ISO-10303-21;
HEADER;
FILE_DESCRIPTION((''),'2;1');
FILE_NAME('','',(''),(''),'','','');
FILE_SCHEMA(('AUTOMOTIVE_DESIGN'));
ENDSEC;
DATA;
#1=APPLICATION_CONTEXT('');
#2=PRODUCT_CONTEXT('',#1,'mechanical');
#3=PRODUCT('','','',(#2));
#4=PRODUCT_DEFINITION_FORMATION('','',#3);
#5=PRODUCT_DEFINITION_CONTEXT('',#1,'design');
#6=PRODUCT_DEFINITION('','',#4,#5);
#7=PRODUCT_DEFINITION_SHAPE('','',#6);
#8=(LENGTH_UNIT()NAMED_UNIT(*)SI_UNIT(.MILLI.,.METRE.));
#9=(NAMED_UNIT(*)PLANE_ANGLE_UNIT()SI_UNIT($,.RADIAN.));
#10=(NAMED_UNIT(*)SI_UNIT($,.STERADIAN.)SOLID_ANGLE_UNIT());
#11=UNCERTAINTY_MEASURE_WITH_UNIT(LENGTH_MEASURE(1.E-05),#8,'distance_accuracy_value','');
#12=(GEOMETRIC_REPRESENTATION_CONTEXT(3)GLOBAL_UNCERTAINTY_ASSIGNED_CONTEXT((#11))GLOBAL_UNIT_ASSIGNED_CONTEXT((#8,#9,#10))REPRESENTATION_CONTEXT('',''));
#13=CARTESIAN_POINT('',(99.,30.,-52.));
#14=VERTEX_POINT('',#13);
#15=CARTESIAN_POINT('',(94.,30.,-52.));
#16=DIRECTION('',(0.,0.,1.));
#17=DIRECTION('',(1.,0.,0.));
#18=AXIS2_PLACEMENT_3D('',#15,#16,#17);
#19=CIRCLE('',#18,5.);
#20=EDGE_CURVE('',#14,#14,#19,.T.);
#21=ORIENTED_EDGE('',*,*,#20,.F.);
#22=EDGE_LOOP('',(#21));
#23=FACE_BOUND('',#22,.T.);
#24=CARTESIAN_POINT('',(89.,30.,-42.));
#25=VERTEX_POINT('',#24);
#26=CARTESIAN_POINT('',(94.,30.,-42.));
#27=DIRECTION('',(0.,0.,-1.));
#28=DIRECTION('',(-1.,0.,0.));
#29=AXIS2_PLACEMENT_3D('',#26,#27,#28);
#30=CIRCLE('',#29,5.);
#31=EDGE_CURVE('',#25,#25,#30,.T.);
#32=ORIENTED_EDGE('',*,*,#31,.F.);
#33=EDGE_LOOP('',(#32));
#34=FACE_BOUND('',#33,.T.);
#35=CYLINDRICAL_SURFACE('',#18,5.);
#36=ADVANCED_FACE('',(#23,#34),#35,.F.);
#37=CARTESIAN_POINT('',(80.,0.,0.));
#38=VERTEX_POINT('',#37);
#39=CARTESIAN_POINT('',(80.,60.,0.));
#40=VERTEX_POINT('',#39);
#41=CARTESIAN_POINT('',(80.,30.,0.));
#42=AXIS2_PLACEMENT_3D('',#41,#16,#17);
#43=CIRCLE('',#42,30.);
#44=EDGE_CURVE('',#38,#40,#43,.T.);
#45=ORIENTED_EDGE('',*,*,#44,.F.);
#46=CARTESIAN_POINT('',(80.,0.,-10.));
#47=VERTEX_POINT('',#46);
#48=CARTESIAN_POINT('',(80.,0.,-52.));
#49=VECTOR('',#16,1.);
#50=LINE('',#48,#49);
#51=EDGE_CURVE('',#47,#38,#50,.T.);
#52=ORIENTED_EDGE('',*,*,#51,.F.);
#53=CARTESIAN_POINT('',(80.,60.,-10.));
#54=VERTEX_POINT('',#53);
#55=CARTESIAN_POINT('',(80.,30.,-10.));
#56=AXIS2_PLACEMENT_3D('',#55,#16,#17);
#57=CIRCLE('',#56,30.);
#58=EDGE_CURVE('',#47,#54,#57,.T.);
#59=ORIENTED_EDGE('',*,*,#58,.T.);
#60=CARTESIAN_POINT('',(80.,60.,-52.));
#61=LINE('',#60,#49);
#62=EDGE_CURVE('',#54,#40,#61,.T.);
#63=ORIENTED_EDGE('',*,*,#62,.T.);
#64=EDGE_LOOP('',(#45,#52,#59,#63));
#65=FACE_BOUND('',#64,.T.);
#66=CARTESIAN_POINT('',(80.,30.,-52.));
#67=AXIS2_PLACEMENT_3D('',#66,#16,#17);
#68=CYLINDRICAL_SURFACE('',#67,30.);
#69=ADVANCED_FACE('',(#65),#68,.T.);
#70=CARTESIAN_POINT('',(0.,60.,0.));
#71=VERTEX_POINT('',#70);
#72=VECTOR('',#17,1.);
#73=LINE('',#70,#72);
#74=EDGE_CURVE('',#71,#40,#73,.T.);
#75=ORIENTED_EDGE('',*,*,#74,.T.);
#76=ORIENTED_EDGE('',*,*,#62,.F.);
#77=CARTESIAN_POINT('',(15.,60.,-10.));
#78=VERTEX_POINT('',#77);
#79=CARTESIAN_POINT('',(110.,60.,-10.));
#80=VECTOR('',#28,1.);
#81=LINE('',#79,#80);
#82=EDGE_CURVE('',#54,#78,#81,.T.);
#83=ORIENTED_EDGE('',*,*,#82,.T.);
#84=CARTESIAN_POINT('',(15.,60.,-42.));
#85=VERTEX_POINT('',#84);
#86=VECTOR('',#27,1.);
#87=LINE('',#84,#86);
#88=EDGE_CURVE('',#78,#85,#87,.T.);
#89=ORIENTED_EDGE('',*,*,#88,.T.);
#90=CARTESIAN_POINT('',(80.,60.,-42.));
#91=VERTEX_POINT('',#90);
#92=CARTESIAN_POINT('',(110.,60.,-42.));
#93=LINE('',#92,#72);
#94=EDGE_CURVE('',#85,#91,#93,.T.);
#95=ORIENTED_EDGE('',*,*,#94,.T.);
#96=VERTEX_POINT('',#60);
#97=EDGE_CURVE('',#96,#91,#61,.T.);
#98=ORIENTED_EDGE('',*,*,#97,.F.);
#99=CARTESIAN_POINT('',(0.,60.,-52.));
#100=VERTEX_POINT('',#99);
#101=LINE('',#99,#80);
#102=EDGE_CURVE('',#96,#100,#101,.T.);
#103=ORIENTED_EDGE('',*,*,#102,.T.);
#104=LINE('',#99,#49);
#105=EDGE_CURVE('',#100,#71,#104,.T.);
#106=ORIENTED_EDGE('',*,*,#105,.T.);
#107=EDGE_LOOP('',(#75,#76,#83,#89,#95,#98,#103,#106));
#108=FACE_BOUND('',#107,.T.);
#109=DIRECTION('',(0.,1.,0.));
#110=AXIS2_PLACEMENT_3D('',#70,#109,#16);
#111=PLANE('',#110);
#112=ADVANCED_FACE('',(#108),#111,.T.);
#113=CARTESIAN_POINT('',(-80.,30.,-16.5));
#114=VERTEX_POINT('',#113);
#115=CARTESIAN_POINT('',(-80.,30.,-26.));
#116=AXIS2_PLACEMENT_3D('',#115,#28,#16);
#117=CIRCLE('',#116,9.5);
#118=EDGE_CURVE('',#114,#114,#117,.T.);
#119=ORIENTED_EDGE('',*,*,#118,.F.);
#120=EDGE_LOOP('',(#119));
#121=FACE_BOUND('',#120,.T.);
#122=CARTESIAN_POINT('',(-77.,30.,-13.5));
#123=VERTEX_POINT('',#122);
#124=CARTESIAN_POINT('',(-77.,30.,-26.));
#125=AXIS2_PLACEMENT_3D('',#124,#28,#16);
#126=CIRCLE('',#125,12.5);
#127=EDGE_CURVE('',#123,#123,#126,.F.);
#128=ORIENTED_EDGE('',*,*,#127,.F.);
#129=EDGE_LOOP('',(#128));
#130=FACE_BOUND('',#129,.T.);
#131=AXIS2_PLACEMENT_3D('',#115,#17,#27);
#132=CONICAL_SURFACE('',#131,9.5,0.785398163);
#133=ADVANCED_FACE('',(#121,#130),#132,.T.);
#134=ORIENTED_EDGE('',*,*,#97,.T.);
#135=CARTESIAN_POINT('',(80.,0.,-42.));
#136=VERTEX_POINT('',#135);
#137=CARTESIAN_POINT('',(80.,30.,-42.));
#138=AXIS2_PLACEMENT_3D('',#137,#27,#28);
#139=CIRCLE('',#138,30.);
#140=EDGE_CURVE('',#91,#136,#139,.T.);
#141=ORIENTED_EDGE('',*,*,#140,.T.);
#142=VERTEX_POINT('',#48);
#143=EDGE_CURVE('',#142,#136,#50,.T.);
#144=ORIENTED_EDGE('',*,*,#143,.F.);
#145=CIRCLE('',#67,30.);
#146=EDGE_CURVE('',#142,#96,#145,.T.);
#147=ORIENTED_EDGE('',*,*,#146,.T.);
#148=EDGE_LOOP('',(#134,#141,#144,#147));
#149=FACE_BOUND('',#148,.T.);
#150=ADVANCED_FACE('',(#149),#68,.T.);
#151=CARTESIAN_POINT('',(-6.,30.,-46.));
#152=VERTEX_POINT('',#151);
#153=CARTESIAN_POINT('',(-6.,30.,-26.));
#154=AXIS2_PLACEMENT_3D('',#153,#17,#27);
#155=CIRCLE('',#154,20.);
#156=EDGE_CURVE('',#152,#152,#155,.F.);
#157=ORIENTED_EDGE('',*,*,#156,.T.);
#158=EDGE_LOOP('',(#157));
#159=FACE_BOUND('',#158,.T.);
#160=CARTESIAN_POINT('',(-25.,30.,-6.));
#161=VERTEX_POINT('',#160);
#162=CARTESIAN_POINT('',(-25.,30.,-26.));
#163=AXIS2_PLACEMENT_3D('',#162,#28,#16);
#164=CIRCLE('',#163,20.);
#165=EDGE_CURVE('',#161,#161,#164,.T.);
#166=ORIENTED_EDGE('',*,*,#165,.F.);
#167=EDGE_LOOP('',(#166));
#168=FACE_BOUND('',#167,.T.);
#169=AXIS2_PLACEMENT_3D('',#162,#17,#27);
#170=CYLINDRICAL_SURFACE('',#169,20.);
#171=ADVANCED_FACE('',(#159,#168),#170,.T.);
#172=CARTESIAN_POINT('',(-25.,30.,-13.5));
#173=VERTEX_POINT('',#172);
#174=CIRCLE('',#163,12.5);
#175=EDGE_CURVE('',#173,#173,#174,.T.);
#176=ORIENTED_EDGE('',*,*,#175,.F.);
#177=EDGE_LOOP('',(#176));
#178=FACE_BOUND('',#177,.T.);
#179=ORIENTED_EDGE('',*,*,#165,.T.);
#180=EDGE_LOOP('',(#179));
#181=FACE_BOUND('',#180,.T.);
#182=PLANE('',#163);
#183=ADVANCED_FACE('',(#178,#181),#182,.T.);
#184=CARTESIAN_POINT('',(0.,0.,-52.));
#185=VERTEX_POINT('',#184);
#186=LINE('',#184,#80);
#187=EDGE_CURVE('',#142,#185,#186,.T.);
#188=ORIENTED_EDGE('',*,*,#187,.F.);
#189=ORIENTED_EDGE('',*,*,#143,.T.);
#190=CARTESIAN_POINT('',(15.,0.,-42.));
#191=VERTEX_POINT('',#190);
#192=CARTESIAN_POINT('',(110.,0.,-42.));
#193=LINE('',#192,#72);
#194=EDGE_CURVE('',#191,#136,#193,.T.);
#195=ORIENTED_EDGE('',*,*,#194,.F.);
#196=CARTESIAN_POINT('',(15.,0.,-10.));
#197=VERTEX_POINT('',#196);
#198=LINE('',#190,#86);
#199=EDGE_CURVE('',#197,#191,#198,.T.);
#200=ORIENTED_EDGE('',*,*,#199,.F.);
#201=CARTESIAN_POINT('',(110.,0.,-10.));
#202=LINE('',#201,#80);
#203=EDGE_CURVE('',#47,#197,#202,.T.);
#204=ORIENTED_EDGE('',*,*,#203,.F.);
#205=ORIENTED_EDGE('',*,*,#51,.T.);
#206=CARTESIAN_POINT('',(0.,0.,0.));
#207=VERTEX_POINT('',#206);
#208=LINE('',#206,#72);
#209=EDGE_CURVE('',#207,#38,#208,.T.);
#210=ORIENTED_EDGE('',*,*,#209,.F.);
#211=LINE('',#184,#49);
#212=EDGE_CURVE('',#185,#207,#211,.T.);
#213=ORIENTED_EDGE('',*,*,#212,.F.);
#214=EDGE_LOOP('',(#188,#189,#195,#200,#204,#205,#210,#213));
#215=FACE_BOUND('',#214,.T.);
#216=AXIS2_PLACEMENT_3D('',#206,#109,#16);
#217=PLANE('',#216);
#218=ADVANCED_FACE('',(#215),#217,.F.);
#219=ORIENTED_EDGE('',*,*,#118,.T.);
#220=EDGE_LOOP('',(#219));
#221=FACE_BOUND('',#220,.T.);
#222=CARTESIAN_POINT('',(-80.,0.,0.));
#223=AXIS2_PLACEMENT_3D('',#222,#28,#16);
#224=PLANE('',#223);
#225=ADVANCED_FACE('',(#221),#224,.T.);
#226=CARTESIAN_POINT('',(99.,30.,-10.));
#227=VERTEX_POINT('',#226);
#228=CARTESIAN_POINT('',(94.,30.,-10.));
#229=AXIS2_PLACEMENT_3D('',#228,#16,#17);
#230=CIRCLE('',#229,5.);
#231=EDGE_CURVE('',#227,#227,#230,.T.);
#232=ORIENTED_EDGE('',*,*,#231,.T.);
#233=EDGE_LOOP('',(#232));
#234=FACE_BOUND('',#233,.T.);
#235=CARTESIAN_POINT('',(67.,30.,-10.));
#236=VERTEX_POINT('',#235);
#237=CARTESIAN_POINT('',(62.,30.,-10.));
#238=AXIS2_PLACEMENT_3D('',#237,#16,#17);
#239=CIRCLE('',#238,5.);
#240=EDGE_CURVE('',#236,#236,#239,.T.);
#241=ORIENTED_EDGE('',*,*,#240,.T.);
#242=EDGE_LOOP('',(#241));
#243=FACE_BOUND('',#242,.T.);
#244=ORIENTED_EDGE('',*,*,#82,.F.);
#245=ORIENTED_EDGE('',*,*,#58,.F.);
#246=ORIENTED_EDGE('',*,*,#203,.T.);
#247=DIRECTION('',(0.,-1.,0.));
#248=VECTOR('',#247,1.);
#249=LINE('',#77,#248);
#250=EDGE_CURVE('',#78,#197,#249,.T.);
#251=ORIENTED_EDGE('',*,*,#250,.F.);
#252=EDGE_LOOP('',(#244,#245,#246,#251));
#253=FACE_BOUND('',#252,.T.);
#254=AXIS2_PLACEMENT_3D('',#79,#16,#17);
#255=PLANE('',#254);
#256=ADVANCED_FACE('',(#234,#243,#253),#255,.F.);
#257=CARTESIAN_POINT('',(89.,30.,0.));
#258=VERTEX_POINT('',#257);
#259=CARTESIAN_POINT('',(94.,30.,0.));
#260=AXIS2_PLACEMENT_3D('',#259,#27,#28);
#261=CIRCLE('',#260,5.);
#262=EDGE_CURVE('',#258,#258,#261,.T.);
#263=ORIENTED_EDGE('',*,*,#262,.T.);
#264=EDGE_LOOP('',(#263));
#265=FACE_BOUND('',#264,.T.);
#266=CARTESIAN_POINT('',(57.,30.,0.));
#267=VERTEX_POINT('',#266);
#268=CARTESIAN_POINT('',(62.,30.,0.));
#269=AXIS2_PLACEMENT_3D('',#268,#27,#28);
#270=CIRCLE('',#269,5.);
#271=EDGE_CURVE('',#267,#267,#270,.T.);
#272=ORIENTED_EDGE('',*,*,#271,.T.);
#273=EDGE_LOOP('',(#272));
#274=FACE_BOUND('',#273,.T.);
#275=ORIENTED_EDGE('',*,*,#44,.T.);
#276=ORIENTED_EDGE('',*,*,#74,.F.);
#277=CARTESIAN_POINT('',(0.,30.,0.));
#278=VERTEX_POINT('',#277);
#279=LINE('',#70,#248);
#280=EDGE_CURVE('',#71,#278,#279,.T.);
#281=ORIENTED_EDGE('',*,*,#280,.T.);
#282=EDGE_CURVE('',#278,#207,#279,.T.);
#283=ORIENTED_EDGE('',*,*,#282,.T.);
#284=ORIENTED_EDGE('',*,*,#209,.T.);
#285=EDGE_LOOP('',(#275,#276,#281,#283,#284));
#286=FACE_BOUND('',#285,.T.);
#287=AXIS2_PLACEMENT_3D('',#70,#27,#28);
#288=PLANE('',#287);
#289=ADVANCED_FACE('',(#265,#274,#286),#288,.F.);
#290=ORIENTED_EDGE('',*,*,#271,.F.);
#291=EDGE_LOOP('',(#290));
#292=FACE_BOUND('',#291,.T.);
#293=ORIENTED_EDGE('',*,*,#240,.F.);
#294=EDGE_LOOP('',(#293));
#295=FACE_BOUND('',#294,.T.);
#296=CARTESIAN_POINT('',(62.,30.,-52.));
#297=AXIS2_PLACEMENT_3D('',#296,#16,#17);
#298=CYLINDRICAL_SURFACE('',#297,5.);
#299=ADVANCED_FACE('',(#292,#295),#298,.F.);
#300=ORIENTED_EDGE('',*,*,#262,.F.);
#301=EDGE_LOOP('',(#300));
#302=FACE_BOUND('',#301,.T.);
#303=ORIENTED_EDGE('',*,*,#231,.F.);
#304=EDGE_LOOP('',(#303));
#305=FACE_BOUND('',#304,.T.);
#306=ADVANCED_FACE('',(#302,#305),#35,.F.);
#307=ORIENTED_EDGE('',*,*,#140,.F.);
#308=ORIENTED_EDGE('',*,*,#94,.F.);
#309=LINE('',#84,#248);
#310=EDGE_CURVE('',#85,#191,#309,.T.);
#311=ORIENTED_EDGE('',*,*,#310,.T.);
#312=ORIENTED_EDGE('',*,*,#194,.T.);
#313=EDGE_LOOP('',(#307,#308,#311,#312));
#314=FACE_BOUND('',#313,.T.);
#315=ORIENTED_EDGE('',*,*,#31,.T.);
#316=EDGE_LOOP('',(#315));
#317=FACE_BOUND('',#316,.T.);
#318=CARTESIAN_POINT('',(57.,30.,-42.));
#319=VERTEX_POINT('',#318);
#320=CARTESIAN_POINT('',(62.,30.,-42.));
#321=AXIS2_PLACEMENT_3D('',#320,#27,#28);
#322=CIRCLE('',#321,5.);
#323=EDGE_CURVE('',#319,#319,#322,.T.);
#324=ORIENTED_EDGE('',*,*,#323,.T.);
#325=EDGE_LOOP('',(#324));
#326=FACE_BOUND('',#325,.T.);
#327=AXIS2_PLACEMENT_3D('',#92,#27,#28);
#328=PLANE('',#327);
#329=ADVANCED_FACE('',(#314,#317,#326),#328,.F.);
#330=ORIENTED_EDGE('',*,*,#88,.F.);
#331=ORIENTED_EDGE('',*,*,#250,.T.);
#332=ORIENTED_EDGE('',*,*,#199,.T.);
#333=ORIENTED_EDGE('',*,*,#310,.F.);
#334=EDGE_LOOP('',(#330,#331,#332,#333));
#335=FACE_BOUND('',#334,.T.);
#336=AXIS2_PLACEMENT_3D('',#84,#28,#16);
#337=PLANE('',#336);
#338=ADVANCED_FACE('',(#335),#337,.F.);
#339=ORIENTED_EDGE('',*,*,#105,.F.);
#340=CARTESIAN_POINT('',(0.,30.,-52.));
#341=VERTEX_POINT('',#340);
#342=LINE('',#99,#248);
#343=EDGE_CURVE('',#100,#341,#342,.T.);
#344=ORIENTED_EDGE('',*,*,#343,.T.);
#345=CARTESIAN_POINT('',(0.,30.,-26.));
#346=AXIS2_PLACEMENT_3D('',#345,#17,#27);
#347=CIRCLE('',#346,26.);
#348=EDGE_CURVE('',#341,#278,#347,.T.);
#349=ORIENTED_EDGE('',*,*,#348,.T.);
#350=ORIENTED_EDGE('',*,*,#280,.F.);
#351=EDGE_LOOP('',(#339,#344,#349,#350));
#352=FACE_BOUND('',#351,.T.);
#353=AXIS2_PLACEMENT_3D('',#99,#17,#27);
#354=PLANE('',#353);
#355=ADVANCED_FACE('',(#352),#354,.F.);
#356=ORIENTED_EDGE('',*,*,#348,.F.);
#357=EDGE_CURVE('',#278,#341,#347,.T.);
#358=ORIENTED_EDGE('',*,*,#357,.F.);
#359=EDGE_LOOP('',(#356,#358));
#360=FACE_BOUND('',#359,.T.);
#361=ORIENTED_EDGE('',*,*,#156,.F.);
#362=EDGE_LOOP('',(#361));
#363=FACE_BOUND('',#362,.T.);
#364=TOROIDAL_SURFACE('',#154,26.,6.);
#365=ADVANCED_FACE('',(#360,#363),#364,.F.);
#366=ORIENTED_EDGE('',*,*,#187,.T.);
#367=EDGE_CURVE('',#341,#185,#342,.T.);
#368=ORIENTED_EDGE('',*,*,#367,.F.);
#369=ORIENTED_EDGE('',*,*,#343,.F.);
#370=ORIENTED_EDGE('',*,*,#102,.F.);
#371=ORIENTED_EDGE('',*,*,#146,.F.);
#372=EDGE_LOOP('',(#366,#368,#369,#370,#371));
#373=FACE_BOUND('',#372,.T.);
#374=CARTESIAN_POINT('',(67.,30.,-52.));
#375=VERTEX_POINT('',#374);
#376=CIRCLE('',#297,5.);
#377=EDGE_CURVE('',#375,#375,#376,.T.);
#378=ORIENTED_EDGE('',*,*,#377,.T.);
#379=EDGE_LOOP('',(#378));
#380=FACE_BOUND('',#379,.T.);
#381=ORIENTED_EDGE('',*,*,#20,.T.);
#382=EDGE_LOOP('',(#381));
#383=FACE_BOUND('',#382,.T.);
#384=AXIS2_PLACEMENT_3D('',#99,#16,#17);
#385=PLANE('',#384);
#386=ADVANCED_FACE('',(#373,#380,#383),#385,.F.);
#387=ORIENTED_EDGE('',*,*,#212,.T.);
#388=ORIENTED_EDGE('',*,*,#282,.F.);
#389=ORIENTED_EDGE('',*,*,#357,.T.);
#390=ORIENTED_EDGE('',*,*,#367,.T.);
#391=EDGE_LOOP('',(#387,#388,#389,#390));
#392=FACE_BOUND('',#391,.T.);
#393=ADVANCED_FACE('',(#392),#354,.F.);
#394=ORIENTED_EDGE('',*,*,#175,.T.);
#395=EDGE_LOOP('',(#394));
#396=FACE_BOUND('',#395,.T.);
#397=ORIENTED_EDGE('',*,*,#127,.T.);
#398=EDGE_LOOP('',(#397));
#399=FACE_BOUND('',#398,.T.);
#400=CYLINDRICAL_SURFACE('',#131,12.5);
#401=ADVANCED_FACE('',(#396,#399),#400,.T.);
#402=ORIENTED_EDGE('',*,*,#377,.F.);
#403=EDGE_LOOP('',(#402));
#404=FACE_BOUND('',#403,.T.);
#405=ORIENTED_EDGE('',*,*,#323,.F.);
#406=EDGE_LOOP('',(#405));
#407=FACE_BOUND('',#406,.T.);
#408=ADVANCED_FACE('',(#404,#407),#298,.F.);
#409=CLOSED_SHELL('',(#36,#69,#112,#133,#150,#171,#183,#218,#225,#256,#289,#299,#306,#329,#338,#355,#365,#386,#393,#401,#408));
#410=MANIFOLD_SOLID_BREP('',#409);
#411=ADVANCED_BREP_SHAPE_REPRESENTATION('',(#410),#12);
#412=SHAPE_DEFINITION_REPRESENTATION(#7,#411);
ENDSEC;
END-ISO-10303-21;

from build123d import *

# Parameters (mm, degrees)
BOSS_EXTRUDE2_DEPTH     = 60
CUT_EXTRUDE1_DEPTH      = 136.661343057
SKETCH3_R               = 12.5
BOSS_EXTRUDE3_DEPTH     = 80
SKETCH3_3_R             = 20
SKETCH3_3_R_2           = 12.5
BOSS_EXTRUDE4_DEPTH     = 25
FILLET2_R               = 6
CHAMFER1_SIZE           = 3
CUT_EXTRUDE2_DEPTH      = 136.661343057
CUT_EXTRUDE2_DEPTH_BACK = 136.661343057
SKETCH4_R               = 5


with BuildPart() as part:
    # Sketch1 → Boss-Extrude2 (new body)
    with BuildSketch(Plane(origin=(0, 0, 0), x_dir=(1, 0, 0), z_dir=(0, 1, 0))):
        Polygon((110, 10), (110, 0), (0, 0), (0, 52), (110, 52), (110, 42), (15, 42), (15, 10), align=None)
    extrude(amount=BOSS_EXTRUDE2_DEPTH)

    # Sketch2 → Cut-Extrude1 (cut, through all)
    with BuildSketch(Plane.XY):
        with BuildLine():
            Line((110, 60), (80, 60))
            ThreePointArc((80, 60), (101.213203436, 51.213203436), (110, 30))
            Line((110, 30), (110, 60))
        make_face()
        with BuildLine():
            Line((110, 0), (110, 30))
            ThreePointArc((110, 30), (101.213203436, 8.786796564), (80, 0))
            Line((80, 0), (110, 0))
        make_face()
    extrude(amount=-CUT_EXTRUDE1_DEPTH, mode=Mode.SUBTRACT)

    # Sketch3 → Boss-Extrude3 (add)
    with BuildSketch(Plane.ZY):
        with Locations((-26, 30)):
            Circle(SKETCH3_R)
    extrude(amount=BOSS_EXTRUDE3_DEPTH)

    # Sketch3<3> → Boss-Extrude4 (add)
    with BuildSketch(Plane.ZY):
        with Locations(Location((-26, 30, 0), (0, 0, 180))):
            Circle(SKETCH3_3_R)
        with Locations((-26, 30)):
            Circle(SKETCH3_3_R_2, mode=Mode.SUBTRACT)
    extrude(amount=BOSS_EXTRUDE4_DEPTH)

    # Fillet2
    fillet2_edges = [part.edges().sort_by_distance(p)[0] for p in [
        (0, 30, -6),
    ]]
    fillet(fillet2_edges, radius=FILLET2_R - 0.0001)  # a hair under: the kernel refuses the full size

    # Chamfer1
    chamfer1_edges = [part.edges().sort_by_distance(p)[0] for p in [
        (-80, 30, -38.5),
    ]]
    chamfer(chamfer1_edges, length=CHAMFER1_SIZE)

    # Sketch4 → Cut-Extrude2 (cut, two sides: drawn at the far end of the back side and taken through both)
    with BuildSketch(Plane.XY.offset(-CUT_EXTRUDE2_DEPTH_BACK)):
        with Locations((62, 30)):
            Circle(SKETCH4_R)
        with Locations((94, 30)):
            Circle(SKETCH4_R)
    extrude(amount=CUT_EXTRUDE2_DEPTH + CUT_EXTRUDE2_DEPTH_BACK, mode=Mode.SUBTRACT)


solid = part.part
